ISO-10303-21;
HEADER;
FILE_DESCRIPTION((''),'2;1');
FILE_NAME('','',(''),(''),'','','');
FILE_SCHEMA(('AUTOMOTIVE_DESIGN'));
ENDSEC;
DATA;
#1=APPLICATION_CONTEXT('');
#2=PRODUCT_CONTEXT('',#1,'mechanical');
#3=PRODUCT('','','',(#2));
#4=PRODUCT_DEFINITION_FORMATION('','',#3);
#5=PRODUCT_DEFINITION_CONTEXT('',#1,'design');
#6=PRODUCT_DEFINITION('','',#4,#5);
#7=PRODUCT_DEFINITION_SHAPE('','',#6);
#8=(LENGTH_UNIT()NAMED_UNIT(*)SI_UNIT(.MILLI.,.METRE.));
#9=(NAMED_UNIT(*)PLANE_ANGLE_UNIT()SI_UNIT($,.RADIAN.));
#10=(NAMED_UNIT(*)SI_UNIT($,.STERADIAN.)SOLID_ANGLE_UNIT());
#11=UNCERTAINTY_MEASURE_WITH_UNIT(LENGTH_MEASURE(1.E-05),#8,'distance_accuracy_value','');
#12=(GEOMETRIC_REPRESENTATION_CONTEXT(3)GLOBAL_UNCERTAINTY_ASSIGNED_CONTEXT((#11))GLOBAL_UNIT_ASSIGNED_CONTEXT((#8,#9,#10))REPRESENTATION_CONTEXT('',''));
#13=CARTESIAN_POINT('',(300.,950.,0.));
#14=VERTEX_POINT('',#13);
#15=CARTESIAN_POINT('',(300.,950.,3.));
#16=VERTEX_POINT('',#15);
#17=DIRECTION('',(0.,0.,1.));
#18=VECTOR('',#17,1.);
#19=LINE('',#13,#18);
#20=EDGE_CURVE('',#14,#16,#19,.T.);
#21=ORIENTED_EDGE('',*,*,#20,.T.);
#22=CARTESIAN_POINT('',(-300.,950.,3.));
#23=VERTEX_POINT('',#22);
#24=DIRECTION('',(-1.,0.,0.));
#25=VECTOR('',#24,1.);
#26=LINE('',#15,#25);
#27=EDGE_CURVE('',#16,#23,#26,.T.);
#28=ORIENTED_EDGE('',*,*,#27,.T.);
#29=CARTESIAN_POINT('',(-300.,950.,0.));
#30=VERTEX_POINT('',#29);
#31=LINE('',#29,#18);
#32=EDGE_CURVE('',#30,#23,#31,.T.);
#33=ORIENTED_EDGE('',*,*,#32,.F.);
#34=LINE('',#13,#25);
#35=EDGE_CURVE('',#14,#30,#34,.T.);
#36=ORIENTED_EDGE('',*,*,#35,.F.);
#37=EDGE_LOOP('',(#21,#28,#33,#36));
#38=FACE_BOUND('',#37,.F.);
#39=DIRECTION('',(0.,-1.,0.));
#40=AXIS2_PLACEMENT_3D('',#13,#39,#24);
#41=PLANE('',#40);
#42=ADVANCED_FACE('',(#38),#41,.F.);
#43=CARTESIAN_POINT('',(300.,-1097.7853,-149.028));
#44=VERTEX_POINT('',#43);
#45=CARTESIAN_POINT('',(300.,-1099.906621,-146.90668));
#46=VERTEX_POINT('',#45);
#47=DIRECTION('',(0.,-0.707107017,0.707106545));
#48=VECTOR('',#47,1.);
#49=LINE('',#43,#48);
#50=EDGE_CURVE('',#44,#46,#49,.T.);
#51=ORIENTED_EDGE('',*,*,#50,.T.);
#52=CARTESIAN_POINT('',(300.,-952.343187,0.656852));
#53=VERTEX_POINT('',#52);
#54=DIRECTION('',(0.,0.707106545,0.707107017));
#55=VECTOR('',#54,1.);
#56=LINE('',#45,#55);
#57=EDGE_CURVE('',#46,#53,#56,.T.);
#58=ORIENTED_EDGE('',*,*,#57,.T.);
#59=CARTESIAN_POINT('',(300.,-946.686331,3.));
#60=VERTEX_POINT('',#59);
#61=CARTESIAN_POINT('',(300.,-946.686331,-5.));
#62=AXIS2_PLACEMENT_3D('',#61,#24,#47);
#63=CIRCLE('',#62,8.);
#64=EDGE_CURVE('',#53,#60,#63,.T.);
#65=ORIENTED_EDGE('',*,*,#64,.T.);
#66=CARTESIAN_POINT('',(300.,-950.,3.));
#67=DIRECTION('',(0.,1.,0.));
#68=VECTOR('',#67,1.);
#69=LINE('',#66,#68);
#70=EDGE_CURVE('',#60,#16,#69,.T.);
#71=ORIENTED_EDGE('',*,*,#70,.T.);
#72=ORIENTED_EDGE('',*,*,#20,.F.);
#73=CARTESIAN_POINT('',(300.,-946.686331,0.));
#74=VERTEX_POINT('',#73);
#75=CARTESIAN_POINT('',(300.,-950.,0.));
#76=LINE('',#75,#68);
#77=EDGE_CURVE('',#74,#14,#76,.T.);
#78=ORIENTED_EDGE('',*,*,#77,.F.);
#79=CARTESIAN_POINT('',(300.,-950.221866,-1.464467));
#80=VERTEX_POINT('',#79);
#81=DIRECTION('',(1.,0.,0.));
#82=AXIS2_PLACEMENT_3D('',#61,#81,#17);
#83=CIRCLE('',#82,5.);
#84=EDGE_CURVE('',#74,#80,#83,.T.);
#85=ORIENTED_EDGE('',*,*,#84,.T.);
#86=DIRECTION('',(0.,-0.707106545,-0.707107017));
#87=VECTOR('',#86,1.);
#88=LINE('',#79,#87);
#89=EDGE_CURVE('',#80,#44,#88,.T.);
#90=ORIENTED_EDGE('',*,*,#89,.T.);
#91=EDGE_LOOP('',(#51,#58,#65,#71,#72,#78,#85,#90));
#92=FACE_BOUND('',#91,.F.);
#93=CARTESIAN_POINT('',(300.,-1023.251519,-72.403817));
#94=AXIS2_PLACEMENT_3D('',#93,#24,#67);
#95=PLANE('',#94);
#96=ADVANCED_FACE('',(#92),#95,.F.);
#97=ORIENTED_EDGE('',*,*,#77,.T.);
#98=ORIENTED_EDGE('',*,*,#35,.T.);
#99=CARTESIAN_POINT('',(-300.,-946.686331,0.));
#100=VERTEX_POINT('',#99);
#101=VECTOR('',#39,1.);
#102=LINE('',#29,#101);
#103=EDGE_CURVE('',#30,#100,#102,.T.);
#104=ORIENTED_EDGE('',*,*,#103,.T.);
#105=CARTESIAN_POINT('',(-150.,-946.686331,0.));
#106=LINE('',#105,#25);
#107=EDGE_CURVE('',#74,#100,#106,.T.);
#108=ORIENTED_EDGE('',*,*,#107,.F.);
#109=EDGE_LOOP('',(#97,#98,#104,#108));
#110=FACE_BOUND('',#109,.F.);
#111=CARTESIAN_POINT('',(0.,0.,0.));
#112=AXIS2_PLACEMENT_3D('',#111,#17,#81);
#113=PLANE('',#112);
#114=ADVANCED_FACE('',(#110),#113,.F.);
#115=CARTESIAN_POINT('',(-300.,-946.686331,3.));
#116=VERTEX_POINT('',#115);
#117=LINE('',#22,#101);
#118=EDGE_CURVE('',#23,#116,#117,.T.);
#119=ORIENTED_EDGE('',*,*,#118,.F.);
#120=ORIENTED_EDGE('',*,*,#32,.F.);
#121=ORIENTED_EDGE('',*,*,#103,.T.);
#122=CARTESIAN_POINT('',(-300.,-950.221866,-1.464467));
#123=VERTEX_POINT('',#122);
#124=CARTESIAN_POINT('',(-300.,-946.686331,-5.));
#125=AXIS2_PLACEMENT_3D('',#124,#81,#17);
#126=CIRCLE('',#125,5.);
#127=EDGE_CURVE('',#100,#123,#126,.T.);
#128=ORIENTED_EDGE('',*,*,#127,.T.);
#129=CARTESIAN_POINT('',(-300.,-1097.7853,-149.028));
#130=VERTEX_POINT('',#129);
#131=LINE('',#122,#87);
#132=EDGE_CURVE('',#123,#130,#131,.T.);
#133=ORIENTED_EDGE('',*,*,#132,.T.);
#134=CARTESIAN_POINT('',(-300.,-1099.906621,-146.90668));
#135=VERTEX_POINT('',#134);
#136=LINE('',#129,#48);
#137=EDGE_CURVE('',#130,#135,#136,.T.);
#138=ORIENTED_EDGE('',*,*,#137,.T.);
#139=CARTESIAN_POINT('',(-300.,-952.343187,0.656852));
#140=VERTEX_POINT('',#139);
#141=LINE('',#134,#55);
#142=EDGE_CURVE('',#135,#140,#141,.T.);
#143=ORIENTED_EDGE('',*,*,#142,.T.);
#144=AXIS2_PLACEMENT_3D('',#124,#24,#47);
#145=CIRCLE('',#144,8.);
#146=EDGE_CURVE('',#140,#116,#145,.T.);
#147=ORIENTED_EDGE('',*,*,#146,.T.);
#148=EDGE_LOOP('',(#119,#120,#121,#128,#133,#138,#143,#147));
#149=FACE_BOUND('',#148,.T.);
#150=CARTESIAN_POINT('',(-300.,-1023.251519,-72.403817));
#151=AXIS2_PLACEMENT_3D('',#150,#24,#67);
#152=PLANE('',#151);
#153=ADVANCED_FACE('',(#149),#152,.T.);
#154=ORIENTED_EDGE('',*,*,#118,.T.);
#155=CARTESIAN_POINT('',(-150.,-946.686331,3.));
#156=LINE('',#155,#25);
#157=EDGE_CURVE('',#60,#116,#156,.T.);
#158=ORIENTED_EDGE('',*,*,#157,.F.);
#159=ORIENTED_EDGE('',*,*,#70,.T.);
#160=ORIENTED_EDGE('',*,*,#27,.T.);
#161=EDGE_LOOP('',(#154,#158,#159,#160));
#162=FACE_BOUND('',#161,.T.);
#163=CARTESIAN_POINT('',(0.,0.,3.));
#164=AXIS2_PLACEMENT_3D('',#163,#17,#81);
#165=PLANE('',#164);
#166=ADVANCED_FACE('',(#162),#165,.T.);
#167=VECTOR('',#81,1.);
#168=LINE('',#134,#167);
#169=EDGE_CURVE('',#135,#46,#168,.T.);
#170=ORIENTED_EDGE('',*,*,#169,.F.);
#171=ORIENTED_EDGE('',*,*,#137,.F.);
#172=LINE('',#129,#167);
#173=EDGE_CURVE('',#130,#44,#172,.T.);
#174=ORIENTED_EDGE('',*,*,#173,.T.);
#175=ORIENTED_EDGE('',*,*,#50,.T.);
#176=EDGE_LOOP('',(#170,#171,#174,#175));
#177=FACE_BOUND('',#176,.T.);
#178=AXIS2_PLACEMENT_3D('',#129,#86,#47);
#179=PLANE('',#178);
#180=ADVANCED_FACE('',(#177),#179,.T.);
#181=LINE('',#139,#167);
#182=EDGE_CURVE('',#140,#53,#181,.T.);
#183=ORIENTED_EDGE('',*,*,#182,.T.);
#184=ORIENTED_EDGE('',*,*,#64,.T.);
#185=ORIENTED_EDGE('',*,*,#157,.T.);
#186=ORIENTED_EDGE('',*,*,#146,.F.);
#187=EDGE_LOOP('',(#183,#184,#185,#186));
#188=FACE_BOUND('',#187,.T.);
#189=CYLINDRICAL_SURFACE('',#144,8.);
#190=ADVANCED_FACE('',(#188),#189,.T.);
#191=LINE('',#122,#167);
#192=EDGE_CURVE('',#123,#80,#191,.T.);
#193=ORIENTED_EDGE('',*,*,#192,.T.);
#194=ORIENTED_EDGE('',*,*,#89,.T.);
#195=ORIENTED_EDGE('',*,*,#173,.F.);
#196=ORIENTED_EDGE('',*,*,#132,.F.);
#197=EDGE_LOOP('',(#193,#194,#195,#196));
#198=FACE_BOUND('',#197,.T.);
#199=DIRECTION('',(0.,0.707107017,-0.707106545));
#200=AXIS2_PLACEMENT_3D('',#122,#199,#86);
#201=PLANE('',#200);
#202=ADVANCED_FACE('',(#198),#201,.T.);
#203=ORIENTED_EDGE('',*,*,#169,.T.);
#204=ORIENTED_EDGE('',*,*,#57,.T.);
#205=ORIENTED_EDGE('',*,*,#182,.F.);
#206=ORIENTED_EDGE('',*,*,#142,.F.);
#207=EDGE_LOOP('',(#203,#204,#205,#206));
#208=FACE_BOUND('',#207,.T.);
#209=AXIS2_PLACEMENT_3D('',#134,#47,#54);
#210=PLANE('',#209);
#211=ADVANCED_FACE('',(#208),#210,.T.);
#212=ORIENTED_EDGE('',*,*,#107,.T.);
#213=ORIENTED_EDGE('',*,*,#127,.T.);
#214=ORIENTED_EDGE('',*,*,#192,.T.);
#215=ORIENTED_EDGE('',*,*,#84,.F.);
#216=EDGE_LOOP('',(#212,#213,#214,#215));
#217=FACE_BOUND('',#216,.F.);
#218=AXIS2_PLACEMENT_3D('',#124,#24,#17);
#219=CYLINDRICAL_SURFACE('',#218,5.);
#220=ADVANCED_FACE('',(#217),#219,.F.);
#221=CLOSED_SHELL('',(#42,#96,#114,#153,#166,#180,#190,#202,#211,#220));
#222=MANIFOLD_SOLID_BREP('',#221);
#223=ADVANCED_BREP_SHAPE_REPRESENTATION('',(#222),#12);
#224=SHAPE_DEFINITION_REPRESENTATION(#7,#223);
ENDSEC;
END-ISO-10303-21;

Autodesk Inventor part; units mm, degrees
ref_plane "YZ Plane" through (0, 0, 0) normal (1, 0, 0) x (0, 1, 0)
ref_plane "XZ Plane" through (0, 0, 0) normal (0, 1, 0) x (-1, 0, 0)
ref_plane "XY Plane" through (0, 0, 0) normal (0, 0, 1) x (1, 0, 0)
sketch "Sketch1" plane through (0, 0, 0) normal (0, 0, 1) x (1, 0, 0)
  line L0 (-300, -950) -> (300, -950)
  line L1 (300, -950) -> (300, 950)
  line L2 (300, 950) -> (-300, 950)
  line L3 (-300, 950) -> (-300, -950)
  line L4 (-300, -950) -> (300, 950) construction
  line L5 (300, -950) -> (-300, 950) construction
  point P0 (0, 0)
  dimension "d0" = 600
  dimension "d1" = 1900
extrude "Plate1" add sketch "Sketch1" along normal blind 3
sketch "Sketch3" plane through (-300, -947.8787, 0.8787) normal (0, -0.7071068, 0.7071068) x (1, 0, 0)
  line L0 (600, 0) -> (0, 0)
  line L1 (0, 0) -> (0, -212)
  line L2 (0, -212) -> (600, -212)
  line L3 (600, -212) -> (600, 0)
edge flange "Flange2" height 212 angle 45 thickness 3 bend radius 5 thickness toward (0, -0.7071068, 0.7071068) relief round relief width 3 relief depth 1.5 edges at (0, -950, 0) wall of the first edge with corners at (300, -947.8787, 0.8787) (-300, -947.8787, 0.8787) (-300, -1097.7853, -149.028) (300, -1097.7853, -149.028)
bend "Bend2"
corner "Corner2"
sketch "Sketch5" plane through (300, -1097.7853, -149.028) normal (0, 0.7071068, -0.7071068) x (-1, 0, 0)
  line L0 (575, 36.661) -> (575, 25) construction
  line L1 (575, 25) -> (375, 25) construction
  line L2 (375, 25) -> (375, 36.661) construction
  line L3 (375, 36.661) -> (575, 36.661) construction
  line L4 (0, 0) -> (600, 0) projected
  line L5 (600, 208.6863) -> (600, 0) projected
  point P0 (300, 881.6301)
  point P1 (575, 30.8305)
  dimension "d23" = 200
  dimension "d24" = 11.661
  dimension "d25" = 25
  dimension "d26" = 25
mark "Mark1"
equation "\"d2\" = Thickness"
equation "\"d13\" = BendReliefWidth"
equation "\"d14\" = BendReliefDepth"
equation "\"d15\" = MinimumRemnant"
equation "\"d16\" = TransitionRadius"
equation "\"d19\" = BendRadius"
equation "\"d20\" = CornerReliefSize"
equation "\"d21\" = GapSize"
equation "\"d22\" = JacobiRadiusSize"
equation "\"BendReliefWidth\" = Thickness"
equation "\"BendReliefDepth\" = 0.5 * Thickness"
equation "\"CornerReliefSize\" = 4 * Thickness"
equation "\"MinimumRemnant\" = 2 * Thickness"
equation "\"TransitionRadius\" = BendRadius"
equation "\"JacobiRadiusSize\" = BendRadius"
equation "\"GapSize\" = Thickness"
equation "\"Thickness\" = 3"
equation "\"BendRadius\" = 5"
properties part number "BSH 013 floor" material "09g2s"
